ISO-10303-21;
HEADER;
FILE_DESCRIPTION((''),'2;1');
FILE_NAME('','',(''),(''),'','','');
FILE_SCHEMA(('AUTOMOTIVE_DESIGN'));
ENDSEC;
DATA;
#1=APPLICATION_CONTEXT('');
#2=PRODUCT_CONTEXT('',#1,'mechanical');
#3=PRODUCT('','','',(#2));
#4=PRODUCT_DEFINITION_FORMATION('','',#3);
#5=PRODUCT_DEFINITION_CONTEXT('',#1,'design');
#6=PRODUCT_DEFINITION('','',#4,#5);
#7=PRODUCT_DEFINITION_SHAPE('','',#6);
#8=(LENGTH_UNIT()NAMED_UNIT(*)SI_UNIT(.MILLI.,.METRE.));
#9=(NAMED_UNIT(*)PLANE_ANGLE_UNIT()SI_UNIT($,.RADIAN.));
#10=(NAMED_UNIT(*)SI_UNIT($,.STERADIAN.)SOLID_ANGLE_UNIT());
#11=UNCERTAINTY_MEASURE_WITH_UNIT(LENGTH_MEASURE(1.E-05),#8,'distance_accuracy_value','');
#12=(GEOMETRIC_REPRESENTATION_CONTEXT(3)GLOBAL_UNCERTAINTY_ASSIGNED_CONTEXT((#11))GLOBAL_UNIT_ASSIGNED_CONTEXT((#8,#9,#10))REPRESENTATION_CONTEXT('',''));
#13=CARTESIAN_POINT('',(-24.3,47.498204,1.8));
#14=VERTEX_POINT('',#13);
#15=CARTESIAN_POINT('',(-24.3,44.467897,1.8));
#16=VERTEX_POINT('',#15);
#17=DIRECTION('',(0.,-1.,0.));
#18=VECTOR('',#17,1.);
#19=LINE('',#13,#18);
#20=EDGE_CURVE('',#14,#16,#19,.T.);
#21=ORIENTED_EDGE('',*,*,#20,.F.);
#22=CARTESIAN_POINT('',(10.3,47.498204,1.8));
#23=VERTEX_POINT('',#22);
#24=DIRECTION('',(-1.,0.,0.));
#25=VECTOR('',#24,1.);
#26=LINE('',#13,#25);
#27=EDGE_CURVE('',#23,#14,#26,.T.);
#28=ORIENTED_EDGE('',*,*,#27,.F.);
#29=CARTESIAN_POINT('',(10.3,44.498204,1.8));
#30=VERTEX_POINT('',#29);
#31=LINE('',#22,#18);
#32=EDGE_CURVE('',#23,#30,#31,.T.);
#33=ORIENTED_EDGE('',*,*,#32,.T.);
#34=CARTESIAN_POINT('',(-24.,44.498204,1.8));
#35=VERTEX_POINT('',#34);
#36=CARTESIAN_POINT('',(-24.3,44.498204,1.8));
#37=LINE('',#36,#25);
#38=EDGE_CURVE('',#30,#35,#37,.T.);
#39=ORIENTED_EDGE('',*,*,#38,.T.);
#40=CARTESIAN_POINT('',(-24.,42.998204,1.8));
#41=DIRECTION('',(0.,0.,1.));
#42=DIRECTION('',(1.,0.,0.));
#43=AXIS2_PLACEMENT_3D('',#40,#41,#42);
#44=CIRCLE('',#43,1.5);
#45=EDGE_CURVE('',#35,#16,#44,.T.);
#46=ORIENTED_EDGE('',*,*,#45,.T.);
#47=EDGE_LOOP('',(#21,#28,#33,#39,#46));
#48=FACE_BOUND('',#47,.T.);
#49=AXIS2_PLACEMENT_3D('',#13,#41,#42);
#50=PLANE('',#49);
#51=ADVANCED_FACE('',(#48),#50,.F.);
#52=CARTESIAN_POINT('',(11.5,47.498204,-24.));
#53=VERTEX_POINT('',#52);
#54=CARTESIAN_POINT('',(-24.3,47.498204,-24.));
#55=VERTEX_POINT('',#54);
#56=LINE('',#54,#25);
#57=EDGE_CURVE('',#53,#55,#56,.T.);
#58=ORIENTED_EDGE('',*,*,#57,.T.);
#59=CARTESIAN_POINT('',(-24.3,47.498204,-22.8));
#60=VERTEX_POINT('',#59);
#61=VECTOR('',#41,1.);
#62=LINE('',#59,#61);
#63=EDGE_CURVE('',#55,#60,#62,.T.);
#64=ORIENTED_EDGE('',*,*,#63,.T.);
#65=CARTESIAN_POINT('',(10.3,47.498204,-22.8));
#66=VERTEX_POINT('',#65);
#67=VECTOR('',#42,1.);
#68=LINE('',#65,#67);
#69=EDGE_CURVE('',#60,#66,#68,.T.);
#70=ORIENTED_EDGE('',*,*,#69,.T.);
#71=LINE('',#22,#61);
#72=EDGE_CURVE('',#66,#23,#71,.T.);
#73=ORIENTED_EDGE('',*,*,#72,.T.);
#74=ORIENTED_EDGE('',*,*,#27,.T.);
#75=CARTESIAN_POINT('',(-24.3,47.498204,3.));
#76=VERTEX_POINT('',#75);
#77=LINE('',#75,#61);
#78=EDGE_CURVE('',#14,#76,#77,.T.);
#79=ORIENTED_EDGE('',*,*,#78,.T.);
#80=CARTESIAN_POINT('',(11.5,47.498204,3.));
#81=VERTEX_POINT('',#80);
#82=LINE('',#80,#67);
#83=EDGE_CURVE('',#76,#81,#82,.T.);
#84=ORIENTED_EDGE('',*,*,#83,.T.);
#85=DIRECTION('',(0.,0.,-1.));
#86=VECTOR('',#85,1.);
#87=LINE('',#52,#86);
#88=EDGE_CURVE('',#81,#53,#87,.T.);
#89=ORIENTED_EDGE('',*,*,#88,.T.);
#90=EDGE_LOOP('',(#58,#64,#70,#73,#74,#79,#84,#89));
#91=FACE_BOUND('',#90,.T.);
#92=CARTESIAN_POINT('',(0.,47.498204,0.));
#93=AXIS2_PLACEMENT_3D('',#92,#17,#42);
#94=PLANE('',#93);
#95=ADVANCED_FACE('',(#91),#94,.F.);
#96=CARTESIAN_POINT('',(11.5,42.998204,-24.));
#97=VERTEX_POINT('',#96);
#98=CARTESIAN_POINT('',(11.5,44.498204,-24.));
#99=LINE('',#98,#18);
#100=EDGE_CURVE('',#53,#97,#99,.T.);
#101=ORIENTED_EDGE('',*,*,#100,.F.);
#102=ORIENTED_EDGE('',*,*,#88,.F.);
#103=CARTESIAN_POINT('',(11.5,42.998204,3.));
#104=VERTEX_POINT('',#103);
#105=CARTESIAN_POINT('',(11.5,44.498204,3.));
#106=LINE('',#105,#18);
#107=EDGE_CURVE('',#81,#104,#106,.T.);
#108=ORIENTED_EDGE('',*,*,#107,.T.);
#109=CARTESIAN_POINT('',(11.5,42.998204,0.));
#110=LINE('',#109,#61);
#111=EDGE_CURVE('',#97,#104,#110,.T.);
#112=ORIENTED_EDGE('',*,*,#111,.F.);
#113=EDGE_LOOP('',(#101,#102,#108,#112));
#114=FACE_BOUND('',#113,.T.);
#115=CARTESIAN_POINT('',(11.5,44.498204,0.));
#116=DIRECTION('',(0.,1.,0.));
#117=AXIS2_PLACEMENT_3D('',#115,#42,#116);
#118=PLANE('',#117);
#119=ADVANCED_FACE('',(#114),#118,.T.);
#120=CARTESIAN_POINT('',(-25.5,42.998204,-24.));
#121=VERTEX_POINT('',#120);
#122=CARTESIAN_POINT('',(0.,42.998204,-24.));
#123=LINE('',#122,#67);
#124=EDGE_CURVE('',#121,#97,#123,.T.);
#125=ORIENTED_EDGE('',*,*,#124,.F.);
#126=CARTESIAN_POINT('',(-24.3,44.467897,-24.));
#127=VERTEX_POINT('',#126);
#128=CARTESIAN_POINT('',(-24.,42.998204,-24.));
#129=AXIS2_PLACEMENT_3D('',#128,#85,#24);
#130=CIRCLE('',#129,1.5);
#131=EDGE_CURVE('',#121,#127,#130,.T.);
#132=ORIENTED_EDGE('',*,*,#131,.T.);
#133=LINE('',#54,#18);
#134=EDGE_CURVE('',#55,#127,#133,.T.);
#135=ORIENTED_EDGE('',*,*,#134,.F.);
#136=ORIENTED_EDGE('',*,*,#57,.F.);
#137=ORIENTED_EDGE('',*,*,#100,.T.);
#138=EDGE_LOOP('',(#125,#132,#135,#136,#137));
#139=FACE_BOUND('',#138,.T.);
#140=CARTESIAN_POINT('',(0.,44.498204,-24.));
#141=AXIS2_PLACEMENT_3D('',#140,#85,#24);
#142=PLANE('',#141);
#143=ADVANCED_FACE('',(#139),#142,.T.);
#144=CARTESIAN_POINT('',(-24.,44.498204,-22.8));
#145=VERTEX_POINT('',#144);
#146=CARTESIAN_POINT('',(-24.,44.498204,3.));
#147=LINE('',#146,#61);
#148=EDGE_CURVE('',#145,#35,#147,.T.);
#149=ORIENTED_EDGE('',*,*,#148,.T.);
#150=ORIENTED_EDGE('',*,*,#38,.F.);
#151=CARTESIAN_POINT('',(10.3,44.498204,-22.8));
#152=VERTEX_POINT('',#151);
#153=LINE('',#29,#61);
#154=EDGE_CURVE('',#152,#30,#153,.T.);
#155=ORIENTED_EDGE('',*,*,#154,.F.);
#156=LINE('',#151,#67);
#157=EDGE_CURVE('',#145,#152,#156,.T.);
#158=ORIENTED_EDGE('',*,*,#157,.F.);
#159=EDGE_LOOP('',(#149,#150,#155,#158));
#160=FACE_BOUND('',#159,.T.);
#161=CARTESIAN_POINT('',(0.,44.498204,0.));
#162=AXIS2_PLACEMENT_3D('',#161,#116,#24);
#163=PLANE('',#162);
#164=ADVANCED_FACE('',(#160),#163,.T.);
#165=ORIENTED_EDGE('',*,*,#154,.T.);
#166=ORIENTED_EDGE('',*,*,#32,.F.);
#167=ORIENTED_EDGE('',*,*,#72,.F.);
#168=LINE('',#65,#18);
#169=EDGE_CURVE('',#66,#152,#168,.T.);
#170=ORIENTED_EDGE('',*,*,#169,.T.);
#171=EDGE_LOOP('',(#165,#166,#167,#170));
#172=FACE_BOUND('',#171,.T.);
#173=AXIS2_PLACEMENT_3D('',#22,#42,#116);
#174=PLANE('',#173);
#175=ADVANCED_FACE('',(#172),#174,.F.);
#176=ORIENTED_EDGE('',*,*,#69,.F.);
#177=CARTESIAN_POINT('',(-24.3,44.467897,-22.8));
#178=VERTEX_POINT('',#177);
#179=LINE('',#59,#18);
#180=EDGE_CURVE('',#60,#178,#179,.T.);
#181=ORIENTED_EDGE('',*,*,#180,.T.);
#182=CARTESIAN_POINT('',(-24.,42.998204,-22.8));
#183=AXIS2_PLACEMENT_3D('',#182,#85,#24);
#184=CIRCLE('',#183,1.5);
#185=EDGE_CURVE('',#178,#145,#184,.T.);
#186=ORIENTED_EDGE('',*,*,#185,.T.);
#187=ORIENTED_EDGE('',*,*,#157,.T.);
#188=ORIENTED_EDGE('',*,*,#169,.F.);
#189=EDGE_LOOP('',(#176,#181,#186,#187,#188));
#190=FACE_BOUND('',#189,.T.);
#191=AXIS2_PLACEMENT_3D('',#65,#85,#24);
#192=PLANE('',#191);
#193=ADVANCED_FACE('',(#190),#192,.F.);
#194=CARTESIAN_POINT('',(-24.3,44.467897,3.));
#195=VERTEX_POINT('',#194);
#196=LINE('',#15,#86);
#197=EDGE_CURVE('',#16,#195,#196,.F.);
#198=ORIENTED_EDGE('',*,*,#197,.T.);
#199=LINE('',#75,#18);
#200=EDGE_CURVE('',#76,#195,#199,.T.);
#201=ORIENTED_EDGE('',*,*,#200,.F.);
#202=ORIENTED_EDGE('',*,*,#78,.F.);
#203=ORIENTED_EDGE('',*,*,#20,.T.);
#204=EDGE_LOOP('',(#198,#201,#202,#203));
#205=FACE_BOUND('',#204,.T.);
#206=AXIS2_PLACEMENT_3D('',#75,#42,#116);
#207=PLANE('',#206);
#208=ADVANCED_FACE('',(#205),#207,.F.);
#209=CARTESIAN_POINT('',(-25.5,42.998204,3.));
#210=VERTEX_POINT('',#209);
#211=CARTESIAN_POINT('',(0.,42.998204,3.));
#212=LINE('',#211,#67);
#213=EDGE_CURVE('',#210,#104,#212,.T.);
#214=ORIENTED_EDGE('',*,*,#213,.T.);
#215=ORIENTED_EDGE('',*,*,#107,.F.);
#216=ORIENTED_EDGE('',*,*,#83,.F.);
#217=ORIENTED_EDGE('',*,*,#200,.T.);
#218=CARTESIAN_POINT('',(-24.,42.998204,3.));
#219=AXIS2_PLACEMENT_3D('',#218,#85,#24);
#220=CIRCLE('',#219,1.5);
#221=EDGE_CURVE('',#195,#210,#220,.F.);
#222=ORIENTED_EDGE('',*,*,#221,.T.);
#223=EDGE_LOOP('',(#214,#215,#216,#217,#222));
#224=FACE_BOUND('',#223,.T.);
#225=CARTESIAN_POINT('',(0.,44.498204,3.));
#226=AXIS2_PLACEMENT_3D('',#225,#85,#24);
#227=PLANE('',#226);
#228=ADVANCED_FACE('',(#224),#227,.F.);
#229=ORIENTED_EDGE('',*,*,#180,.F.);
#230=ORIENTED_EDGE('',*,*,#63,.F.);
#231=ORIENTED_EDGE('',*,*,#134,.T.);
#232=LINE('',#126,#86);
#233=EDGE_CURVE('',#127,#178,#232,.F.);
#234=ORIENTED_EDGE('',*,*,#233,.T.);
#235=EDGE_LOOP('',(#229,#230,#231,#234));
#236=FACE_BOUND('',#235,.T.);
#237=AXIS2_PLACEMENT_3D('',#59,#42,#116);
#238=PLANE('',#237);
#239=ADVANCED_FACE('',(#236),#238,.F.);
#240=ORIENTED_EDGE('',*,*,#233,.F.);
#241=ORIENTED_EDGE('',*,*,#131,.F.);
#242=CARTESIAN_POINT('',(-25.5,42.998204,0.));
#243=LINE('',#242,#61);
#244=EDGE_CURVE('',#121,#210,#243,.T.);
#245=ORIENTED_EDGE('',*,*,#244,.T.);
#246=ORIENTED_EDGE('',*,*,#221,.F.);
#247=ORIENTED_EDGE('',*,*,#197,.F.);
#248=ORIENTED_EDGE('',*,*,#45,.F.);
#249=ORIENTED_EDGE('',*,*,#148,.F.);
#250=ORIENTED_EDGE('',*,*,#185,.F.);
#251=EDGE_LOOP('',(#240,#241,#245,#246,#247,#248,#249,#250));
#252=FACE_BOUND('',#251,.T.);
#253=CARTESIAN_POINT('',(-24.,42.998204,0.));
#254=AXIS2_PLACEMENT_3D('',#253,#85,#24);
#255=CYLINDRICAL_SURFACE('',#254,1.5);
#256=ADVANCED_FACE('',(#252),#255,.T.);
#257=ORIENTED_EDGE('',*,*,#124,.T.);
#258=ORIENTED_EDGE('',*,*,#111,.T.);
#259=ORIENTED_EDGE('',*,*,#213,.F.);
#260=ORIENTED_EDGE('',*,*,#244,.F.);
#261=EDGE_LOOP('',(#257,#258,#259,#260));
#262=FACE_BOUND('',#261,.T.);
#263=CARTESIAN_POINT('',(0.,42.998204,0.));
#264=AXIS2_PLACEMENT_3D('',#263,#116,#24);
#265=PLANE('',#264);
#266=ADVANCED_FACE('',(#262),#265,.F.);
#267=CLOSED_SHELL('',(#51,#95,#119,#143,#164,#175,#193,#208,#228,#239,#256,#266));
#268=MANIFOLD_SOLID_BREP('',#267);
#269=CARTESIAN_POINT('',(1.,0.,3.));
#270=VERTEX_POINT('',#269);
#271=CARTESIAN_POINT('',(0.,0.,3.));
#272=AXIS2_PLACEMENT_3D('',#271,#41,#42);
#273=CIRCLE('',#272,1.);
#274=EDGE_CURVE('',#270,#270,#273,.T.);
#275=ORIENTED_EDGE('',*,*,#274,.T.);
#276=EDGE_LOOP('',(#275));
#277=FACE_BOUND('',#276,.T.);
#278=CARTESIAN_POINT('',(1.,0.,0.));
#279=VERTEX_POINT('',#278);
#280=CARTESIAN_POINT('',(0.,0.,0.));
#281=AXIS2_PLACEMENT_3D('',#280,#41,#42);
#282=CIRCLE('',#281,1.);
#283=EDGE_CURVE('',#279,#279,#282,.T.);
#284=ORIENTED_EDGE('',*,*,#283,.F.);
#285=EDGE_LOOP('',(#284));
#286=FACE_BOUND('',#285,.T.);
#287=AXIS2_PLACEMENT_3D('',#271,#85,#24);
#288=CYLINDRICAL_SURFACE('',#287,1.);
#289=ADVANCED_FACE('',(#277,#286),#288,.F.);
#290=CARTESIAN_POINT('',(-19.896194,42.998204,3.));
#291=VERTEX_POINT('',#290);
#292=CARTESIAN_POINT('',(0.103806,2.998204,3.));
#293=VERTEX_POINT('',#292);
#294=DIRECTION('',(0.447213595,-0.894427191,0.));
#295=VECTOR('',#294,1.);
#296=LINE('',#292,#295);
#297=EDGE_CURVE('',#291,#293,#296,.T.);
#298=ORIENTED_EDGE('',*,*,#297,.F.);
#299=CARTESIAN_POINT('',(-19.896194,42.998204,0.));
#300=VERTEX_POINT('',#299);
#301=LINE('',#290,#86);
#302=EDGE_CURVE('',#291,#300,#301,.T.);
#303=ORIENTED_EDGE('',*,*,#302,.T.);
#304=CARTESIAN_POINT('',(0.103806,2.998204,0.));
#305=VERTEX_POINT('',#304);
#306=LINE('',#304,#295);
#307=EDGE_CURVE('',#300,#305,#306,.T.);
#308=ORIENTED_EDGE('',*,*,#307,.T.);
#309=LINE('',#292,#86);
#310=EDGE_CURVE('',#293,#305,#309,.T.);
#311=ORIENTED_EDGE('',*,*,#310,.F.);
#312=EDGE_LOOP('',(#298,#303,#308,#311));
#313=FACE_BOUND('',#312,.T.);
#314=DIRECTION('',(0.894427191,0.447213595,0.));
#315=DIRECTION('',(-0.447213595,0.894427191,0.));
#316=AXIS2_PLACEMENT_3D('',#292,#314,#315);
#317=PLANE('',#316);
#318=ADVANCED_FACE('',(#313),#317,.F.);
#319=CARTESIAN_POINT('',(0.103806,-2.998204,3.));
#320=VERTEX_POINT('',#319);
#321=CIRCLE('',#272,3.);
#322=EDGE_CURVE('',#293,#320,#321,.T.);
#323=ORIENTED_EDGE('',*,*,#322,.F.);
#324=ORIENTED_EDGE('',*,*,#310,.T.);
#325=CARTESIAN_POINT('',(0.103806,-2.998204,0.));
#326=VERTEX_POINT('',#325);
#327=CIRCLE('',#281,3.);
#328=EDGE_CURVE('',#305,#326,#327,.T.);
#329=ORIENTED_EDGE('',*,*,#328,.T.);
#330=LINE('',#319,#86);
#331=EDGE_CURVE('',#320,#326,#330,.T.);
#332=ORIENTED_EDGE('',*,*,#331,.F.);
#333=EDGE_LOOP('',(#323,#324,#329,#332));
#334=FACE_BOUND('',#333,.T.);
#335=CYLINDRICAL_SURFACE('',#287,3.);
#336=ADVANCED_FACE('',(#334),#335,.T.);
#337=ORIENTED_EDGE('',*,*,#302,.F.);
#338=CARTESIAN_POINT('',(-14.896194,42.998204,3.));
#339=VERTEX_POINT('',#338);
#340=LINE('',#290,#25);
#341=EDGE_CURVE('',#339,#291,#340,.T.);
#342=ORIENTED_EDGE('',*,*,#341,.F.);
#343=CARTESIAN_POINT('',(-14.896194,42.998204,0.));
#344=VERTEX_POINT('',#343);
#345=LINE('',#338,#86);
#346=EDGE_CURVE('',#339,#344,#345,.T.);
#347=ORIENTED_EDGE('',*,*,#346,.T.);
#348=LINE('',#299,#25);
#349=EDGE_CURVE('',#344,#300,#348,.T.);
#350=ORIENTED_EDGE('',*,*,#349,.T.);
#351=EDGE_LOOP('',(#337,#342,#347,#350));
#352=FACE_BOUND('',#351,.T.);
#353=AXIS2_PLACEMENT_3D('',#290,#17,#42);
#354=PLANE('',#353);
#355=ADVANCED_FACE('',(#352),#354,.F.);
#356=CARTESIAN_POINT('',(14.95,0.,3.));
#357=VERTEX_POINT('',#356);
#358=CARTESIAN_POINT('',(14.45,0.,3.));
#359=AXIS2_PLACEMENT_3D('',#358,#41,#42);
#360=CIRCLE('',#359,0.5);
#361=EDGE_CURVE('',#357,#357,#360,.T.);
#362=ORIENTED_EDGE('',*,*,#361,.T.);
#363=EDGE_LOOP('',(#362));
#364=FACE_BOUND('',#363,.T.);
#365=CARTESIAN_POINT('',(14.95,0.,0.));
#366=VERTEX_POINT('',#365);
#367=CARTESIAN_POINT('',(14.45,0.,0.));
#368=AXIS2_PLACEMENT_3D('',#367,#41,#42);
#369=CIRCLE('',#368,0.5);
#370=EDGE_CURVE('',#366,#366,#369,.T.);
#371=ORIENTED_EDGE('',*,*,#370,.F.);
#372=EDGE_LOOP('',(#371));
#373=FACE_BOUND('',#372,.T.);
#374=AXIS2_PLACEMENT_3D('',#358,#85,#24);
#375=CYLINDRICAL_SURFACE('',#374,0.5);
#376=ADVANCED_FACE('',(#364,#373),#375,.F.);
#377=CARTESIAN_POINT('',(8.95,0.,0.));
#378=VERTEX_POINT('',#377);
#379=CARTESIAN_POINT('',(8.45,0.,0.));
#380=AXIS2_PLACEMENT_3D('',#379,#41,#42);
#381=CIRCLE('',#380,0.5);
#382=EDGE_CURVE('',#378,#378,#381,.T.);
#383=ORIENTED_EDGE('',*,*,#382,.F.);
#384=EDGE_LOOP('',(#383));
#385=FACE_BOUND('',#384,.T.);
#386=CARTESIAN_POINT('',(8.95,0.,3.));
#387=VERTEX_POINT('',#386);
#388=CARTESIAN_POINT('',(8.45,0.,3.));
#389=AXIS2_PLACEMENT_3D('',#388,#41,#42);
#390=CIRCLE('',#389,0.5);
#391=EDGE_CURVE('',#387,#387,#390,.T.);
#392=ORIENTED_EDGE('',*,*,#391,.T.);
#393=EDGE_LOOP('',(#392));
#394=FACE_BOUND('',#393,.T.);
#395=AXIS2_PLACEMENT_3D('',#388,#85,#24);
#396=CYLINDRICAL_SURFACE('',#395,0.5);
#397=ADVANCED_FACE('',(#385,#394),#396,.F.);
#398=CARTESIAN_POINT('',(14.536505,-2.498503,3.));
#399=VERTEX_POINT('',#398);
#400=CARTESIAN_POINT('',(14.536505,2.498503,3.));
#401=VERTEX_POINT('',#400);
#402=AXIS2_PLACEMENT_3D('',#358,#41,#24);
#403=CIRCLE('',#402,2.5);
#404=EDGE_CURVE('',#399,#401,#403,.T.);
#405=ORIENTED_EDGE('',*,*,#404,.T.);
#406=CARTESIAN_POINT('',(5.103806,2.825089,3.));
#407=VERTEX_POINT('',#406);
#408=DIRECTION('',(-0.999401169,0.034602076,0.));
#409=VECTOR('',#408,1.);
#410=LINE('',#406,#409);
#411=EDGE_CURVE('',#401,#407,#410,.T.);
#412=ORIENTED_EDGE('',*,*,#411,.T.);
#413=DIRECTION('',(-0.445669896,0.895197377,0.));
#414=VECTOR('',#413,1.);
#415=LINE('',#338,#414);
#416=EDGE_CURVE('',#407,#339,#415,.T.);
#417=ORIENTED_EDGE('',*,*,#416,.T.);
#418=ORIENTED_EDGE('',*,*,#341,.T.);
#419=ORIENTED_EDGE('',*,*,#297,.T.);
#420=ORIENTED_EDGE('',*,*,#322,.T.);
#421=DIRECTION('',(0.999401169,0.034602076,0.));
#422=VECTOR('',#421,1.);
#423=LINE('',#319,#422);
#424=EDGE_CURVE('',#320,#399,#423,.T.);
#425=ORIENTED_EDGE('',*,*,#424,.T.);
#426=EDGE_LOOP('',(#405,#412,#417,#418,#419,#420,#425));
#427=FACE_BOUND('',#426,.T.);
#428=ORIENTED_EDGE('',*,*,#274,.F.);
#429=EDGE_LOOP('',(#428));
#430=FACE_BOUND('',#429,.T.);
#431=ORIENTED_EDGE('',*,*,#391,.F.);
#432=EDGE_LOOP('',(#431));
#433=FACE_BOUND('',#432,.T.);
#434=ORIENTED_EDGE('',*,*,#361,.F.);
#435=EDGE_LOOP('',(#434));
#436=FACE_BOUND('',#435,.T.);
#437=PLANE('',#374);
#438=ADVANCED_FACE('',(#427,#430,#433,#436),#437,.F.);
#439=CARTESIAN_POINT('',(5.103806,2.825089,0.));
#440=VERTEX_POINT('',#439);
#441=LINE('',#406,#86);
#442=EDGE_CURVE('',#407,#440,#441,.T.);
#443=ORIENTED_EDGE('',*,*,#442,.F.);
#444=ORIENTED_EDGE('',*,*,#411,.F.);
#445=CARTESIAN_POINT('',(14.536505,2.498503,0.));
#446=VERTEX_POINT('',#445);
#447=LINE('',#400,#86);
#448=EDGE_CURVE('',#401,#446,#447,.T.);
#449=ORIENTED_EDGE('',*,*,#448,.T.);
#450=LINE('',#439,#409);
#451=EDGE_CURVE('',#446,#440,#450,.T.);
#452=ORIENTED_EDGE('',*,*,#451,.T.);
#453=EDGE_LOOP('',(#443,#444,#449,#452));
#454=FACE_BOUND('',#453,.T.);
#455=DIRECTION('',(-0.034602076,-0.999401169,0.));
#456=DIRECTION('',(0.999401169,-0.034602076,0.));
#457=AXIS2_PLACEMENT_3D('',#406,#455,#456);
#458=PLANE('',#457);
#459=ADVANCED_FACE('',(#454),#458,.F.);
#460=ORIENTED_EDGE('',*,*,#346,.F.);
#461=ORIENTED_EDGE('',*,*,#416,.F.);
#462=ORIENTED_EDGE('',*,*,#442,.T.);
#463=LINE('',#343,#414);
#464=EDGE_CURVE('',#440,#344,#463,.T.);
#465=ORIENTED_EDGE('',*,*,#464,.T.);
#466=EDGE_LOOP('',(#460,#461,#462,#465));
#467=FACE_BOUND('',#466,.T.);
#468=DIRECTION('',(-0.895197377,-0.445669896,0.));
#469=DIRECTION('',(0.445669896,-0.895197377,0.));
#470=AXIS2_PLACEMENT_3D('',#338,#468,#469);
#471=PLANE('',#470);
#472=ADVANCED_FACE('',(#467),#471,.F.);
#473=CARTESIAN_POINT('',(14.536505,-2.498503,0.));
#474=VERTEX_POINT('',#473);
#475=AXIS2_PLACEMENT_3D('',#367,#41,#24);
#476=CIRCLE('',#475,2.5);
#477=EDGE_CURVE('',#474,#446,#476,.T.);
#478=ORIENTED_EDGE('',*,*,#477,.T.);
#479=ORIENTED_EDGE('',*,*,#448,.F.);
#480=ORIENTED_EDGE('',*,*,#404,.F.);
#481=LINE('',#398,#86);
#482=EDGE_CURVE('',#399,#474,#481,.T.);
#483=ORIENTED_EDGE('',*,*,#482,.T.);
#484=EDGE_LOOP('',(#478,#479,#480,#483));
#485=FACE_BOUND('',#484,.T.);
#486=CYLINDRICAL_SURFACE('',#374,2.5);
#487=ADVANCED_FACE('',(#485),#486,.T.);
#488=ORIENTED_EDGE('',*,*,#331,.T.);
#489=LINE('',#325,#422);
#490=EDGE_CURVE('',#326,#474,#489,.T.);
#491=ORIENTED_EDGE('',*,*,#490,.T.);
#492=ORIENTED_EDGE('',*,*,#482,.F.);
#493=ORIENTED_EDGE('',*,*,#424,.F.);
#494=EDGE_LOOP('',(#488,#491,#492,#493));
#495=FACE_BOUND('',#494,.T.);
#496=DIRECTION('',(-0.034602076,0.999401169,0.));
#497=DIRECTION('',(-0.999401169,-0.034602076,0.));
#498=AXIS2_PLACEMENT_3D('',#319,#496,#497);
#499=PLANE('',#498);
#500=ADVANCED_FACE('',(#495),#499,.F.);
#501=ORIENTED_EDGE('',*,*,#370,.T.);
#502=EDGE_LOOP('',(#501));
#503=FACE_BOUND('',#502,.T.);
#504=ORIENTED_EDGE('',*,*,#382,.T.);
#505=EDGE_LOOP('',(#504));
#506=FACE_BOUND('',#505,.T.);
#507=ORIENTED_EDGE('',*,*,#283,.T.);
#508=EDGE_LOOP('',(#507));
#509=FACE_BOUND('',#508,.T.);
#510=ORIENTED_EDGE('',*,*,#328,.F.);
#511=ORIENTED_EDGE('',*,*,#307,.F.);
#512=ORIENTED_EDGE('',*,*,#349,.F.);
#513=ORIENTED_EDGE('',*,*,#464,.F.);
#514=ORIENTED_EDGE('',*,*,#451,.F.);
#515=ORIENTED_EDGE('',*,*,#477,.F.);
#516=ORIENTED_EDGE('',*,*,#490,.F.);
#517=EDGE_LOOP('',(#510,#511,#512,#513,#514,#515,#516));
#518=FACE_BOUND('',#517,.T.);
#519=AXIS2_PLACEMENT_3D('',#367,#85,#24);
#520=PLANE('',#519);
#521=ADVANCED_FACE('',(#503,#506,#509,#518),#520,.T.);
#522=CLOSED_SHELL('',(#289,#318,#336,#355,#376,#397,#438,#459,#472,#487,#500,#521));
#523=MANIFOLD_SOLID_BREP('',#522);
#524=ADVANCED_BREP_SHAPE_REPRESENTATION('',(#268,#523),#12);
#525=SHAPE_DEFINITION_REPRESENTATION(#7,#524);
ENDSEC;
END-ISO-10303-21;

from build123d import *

# Parameters (mm, degrees)
SKETCH1_R           = 1
SKETCH1_R_2         = 0.5
BOSS_EXTRUDE1_DEPTH = 3
SKETCH4_W           = 37
SKETCH4_H           = 27
BOSS_EXTRUDE3_DEPTH = 1.5
BOSS_EXTRUDE4_DEPTH = 3
FILLET1_R           = 1.5


with BuildPart() as part:
    # Sketch1 → Boss-Extrude1 (new body)
    with BuildSketch(Plane.XY):
        with BuildLine():
            Line((0.103806228, -2.998203507), (14.53650519, -2.498502922))
            ThreePointArc((14.53650519, -2.498502922), (16.95, 0), (14.53650519, 2.498502922))
            Line((14.53650519, 2.498502922), (5.103806228, 2.82508946))
            Line((5.103806228, 2.82508946), (-14.896193772, 42.998203507))
            Line((-14.896193772, 42.998203507), (-19.896193772, 42.998203507))
            Line((-19.896193772, 42.998203507), (0.103806228, 2.998203507))
            ThreePointArc((0.103806228, 2.998203507), (-3, 0), (0.103806228, -2.998203507))
        make_face()
        Circle(SKETCH1_R, mode=Mode.SUBTRACT)
        with Locations((8.45, 0)):
            Circle(SKETCH1_R_2, mode=Mode.SUBTRACT)
        with Locations((14.45, 0)):
            Circle(SKETCH1_R_2, mode=Mode.SUBTRACT)
    extrude(amount=BOSS_EXTRUDE1_DEPTH)


with BuildPart() as body_2:
    # Sketch4 → Boss-Extrude3 (new body)
    with BuildSketch(Plane(origin=(0, 42.998203507, 0), x_dir=(1, 0, 0), z_dir=(0, 1, 0))):
        with Locations((-7, 10.5)):
            Rectangle(SKETCH4_W, SKETCH4_H)
    extrude(amount=BOSS_EXTRUDE3_DEPTH)

    # Sketch5 → Boss-Extrude4 (add)
    with BuildSketch(Plane(origin=(0, 44.498203507, 0), x_dir=(1, 0, 0), z_dir=(0, 1, 0))):
        Polygon((-24.3, 22.8), (-24.3, 24), (11.5, 24), (11.5, -3), (-24.3, -3), (-24.3, -1.8), (10.3, -1.8), (10.3, 22.8), align=None)
    extrude(amount=BOSS_EXTRUDE4_DEPTH)

    # Fillet1
    fillet1_edges = [body_2.edges().sort_by_distance(p)[0] for p in [
        (-25.5, 44.498203507, -10.5),
    ]]
    fillet(fillet1_edges, radius=FILLET1_R - 0.0001)  # a hair under: the kernel refuses the full size


solid = Compound([part.part, body_2.part])
